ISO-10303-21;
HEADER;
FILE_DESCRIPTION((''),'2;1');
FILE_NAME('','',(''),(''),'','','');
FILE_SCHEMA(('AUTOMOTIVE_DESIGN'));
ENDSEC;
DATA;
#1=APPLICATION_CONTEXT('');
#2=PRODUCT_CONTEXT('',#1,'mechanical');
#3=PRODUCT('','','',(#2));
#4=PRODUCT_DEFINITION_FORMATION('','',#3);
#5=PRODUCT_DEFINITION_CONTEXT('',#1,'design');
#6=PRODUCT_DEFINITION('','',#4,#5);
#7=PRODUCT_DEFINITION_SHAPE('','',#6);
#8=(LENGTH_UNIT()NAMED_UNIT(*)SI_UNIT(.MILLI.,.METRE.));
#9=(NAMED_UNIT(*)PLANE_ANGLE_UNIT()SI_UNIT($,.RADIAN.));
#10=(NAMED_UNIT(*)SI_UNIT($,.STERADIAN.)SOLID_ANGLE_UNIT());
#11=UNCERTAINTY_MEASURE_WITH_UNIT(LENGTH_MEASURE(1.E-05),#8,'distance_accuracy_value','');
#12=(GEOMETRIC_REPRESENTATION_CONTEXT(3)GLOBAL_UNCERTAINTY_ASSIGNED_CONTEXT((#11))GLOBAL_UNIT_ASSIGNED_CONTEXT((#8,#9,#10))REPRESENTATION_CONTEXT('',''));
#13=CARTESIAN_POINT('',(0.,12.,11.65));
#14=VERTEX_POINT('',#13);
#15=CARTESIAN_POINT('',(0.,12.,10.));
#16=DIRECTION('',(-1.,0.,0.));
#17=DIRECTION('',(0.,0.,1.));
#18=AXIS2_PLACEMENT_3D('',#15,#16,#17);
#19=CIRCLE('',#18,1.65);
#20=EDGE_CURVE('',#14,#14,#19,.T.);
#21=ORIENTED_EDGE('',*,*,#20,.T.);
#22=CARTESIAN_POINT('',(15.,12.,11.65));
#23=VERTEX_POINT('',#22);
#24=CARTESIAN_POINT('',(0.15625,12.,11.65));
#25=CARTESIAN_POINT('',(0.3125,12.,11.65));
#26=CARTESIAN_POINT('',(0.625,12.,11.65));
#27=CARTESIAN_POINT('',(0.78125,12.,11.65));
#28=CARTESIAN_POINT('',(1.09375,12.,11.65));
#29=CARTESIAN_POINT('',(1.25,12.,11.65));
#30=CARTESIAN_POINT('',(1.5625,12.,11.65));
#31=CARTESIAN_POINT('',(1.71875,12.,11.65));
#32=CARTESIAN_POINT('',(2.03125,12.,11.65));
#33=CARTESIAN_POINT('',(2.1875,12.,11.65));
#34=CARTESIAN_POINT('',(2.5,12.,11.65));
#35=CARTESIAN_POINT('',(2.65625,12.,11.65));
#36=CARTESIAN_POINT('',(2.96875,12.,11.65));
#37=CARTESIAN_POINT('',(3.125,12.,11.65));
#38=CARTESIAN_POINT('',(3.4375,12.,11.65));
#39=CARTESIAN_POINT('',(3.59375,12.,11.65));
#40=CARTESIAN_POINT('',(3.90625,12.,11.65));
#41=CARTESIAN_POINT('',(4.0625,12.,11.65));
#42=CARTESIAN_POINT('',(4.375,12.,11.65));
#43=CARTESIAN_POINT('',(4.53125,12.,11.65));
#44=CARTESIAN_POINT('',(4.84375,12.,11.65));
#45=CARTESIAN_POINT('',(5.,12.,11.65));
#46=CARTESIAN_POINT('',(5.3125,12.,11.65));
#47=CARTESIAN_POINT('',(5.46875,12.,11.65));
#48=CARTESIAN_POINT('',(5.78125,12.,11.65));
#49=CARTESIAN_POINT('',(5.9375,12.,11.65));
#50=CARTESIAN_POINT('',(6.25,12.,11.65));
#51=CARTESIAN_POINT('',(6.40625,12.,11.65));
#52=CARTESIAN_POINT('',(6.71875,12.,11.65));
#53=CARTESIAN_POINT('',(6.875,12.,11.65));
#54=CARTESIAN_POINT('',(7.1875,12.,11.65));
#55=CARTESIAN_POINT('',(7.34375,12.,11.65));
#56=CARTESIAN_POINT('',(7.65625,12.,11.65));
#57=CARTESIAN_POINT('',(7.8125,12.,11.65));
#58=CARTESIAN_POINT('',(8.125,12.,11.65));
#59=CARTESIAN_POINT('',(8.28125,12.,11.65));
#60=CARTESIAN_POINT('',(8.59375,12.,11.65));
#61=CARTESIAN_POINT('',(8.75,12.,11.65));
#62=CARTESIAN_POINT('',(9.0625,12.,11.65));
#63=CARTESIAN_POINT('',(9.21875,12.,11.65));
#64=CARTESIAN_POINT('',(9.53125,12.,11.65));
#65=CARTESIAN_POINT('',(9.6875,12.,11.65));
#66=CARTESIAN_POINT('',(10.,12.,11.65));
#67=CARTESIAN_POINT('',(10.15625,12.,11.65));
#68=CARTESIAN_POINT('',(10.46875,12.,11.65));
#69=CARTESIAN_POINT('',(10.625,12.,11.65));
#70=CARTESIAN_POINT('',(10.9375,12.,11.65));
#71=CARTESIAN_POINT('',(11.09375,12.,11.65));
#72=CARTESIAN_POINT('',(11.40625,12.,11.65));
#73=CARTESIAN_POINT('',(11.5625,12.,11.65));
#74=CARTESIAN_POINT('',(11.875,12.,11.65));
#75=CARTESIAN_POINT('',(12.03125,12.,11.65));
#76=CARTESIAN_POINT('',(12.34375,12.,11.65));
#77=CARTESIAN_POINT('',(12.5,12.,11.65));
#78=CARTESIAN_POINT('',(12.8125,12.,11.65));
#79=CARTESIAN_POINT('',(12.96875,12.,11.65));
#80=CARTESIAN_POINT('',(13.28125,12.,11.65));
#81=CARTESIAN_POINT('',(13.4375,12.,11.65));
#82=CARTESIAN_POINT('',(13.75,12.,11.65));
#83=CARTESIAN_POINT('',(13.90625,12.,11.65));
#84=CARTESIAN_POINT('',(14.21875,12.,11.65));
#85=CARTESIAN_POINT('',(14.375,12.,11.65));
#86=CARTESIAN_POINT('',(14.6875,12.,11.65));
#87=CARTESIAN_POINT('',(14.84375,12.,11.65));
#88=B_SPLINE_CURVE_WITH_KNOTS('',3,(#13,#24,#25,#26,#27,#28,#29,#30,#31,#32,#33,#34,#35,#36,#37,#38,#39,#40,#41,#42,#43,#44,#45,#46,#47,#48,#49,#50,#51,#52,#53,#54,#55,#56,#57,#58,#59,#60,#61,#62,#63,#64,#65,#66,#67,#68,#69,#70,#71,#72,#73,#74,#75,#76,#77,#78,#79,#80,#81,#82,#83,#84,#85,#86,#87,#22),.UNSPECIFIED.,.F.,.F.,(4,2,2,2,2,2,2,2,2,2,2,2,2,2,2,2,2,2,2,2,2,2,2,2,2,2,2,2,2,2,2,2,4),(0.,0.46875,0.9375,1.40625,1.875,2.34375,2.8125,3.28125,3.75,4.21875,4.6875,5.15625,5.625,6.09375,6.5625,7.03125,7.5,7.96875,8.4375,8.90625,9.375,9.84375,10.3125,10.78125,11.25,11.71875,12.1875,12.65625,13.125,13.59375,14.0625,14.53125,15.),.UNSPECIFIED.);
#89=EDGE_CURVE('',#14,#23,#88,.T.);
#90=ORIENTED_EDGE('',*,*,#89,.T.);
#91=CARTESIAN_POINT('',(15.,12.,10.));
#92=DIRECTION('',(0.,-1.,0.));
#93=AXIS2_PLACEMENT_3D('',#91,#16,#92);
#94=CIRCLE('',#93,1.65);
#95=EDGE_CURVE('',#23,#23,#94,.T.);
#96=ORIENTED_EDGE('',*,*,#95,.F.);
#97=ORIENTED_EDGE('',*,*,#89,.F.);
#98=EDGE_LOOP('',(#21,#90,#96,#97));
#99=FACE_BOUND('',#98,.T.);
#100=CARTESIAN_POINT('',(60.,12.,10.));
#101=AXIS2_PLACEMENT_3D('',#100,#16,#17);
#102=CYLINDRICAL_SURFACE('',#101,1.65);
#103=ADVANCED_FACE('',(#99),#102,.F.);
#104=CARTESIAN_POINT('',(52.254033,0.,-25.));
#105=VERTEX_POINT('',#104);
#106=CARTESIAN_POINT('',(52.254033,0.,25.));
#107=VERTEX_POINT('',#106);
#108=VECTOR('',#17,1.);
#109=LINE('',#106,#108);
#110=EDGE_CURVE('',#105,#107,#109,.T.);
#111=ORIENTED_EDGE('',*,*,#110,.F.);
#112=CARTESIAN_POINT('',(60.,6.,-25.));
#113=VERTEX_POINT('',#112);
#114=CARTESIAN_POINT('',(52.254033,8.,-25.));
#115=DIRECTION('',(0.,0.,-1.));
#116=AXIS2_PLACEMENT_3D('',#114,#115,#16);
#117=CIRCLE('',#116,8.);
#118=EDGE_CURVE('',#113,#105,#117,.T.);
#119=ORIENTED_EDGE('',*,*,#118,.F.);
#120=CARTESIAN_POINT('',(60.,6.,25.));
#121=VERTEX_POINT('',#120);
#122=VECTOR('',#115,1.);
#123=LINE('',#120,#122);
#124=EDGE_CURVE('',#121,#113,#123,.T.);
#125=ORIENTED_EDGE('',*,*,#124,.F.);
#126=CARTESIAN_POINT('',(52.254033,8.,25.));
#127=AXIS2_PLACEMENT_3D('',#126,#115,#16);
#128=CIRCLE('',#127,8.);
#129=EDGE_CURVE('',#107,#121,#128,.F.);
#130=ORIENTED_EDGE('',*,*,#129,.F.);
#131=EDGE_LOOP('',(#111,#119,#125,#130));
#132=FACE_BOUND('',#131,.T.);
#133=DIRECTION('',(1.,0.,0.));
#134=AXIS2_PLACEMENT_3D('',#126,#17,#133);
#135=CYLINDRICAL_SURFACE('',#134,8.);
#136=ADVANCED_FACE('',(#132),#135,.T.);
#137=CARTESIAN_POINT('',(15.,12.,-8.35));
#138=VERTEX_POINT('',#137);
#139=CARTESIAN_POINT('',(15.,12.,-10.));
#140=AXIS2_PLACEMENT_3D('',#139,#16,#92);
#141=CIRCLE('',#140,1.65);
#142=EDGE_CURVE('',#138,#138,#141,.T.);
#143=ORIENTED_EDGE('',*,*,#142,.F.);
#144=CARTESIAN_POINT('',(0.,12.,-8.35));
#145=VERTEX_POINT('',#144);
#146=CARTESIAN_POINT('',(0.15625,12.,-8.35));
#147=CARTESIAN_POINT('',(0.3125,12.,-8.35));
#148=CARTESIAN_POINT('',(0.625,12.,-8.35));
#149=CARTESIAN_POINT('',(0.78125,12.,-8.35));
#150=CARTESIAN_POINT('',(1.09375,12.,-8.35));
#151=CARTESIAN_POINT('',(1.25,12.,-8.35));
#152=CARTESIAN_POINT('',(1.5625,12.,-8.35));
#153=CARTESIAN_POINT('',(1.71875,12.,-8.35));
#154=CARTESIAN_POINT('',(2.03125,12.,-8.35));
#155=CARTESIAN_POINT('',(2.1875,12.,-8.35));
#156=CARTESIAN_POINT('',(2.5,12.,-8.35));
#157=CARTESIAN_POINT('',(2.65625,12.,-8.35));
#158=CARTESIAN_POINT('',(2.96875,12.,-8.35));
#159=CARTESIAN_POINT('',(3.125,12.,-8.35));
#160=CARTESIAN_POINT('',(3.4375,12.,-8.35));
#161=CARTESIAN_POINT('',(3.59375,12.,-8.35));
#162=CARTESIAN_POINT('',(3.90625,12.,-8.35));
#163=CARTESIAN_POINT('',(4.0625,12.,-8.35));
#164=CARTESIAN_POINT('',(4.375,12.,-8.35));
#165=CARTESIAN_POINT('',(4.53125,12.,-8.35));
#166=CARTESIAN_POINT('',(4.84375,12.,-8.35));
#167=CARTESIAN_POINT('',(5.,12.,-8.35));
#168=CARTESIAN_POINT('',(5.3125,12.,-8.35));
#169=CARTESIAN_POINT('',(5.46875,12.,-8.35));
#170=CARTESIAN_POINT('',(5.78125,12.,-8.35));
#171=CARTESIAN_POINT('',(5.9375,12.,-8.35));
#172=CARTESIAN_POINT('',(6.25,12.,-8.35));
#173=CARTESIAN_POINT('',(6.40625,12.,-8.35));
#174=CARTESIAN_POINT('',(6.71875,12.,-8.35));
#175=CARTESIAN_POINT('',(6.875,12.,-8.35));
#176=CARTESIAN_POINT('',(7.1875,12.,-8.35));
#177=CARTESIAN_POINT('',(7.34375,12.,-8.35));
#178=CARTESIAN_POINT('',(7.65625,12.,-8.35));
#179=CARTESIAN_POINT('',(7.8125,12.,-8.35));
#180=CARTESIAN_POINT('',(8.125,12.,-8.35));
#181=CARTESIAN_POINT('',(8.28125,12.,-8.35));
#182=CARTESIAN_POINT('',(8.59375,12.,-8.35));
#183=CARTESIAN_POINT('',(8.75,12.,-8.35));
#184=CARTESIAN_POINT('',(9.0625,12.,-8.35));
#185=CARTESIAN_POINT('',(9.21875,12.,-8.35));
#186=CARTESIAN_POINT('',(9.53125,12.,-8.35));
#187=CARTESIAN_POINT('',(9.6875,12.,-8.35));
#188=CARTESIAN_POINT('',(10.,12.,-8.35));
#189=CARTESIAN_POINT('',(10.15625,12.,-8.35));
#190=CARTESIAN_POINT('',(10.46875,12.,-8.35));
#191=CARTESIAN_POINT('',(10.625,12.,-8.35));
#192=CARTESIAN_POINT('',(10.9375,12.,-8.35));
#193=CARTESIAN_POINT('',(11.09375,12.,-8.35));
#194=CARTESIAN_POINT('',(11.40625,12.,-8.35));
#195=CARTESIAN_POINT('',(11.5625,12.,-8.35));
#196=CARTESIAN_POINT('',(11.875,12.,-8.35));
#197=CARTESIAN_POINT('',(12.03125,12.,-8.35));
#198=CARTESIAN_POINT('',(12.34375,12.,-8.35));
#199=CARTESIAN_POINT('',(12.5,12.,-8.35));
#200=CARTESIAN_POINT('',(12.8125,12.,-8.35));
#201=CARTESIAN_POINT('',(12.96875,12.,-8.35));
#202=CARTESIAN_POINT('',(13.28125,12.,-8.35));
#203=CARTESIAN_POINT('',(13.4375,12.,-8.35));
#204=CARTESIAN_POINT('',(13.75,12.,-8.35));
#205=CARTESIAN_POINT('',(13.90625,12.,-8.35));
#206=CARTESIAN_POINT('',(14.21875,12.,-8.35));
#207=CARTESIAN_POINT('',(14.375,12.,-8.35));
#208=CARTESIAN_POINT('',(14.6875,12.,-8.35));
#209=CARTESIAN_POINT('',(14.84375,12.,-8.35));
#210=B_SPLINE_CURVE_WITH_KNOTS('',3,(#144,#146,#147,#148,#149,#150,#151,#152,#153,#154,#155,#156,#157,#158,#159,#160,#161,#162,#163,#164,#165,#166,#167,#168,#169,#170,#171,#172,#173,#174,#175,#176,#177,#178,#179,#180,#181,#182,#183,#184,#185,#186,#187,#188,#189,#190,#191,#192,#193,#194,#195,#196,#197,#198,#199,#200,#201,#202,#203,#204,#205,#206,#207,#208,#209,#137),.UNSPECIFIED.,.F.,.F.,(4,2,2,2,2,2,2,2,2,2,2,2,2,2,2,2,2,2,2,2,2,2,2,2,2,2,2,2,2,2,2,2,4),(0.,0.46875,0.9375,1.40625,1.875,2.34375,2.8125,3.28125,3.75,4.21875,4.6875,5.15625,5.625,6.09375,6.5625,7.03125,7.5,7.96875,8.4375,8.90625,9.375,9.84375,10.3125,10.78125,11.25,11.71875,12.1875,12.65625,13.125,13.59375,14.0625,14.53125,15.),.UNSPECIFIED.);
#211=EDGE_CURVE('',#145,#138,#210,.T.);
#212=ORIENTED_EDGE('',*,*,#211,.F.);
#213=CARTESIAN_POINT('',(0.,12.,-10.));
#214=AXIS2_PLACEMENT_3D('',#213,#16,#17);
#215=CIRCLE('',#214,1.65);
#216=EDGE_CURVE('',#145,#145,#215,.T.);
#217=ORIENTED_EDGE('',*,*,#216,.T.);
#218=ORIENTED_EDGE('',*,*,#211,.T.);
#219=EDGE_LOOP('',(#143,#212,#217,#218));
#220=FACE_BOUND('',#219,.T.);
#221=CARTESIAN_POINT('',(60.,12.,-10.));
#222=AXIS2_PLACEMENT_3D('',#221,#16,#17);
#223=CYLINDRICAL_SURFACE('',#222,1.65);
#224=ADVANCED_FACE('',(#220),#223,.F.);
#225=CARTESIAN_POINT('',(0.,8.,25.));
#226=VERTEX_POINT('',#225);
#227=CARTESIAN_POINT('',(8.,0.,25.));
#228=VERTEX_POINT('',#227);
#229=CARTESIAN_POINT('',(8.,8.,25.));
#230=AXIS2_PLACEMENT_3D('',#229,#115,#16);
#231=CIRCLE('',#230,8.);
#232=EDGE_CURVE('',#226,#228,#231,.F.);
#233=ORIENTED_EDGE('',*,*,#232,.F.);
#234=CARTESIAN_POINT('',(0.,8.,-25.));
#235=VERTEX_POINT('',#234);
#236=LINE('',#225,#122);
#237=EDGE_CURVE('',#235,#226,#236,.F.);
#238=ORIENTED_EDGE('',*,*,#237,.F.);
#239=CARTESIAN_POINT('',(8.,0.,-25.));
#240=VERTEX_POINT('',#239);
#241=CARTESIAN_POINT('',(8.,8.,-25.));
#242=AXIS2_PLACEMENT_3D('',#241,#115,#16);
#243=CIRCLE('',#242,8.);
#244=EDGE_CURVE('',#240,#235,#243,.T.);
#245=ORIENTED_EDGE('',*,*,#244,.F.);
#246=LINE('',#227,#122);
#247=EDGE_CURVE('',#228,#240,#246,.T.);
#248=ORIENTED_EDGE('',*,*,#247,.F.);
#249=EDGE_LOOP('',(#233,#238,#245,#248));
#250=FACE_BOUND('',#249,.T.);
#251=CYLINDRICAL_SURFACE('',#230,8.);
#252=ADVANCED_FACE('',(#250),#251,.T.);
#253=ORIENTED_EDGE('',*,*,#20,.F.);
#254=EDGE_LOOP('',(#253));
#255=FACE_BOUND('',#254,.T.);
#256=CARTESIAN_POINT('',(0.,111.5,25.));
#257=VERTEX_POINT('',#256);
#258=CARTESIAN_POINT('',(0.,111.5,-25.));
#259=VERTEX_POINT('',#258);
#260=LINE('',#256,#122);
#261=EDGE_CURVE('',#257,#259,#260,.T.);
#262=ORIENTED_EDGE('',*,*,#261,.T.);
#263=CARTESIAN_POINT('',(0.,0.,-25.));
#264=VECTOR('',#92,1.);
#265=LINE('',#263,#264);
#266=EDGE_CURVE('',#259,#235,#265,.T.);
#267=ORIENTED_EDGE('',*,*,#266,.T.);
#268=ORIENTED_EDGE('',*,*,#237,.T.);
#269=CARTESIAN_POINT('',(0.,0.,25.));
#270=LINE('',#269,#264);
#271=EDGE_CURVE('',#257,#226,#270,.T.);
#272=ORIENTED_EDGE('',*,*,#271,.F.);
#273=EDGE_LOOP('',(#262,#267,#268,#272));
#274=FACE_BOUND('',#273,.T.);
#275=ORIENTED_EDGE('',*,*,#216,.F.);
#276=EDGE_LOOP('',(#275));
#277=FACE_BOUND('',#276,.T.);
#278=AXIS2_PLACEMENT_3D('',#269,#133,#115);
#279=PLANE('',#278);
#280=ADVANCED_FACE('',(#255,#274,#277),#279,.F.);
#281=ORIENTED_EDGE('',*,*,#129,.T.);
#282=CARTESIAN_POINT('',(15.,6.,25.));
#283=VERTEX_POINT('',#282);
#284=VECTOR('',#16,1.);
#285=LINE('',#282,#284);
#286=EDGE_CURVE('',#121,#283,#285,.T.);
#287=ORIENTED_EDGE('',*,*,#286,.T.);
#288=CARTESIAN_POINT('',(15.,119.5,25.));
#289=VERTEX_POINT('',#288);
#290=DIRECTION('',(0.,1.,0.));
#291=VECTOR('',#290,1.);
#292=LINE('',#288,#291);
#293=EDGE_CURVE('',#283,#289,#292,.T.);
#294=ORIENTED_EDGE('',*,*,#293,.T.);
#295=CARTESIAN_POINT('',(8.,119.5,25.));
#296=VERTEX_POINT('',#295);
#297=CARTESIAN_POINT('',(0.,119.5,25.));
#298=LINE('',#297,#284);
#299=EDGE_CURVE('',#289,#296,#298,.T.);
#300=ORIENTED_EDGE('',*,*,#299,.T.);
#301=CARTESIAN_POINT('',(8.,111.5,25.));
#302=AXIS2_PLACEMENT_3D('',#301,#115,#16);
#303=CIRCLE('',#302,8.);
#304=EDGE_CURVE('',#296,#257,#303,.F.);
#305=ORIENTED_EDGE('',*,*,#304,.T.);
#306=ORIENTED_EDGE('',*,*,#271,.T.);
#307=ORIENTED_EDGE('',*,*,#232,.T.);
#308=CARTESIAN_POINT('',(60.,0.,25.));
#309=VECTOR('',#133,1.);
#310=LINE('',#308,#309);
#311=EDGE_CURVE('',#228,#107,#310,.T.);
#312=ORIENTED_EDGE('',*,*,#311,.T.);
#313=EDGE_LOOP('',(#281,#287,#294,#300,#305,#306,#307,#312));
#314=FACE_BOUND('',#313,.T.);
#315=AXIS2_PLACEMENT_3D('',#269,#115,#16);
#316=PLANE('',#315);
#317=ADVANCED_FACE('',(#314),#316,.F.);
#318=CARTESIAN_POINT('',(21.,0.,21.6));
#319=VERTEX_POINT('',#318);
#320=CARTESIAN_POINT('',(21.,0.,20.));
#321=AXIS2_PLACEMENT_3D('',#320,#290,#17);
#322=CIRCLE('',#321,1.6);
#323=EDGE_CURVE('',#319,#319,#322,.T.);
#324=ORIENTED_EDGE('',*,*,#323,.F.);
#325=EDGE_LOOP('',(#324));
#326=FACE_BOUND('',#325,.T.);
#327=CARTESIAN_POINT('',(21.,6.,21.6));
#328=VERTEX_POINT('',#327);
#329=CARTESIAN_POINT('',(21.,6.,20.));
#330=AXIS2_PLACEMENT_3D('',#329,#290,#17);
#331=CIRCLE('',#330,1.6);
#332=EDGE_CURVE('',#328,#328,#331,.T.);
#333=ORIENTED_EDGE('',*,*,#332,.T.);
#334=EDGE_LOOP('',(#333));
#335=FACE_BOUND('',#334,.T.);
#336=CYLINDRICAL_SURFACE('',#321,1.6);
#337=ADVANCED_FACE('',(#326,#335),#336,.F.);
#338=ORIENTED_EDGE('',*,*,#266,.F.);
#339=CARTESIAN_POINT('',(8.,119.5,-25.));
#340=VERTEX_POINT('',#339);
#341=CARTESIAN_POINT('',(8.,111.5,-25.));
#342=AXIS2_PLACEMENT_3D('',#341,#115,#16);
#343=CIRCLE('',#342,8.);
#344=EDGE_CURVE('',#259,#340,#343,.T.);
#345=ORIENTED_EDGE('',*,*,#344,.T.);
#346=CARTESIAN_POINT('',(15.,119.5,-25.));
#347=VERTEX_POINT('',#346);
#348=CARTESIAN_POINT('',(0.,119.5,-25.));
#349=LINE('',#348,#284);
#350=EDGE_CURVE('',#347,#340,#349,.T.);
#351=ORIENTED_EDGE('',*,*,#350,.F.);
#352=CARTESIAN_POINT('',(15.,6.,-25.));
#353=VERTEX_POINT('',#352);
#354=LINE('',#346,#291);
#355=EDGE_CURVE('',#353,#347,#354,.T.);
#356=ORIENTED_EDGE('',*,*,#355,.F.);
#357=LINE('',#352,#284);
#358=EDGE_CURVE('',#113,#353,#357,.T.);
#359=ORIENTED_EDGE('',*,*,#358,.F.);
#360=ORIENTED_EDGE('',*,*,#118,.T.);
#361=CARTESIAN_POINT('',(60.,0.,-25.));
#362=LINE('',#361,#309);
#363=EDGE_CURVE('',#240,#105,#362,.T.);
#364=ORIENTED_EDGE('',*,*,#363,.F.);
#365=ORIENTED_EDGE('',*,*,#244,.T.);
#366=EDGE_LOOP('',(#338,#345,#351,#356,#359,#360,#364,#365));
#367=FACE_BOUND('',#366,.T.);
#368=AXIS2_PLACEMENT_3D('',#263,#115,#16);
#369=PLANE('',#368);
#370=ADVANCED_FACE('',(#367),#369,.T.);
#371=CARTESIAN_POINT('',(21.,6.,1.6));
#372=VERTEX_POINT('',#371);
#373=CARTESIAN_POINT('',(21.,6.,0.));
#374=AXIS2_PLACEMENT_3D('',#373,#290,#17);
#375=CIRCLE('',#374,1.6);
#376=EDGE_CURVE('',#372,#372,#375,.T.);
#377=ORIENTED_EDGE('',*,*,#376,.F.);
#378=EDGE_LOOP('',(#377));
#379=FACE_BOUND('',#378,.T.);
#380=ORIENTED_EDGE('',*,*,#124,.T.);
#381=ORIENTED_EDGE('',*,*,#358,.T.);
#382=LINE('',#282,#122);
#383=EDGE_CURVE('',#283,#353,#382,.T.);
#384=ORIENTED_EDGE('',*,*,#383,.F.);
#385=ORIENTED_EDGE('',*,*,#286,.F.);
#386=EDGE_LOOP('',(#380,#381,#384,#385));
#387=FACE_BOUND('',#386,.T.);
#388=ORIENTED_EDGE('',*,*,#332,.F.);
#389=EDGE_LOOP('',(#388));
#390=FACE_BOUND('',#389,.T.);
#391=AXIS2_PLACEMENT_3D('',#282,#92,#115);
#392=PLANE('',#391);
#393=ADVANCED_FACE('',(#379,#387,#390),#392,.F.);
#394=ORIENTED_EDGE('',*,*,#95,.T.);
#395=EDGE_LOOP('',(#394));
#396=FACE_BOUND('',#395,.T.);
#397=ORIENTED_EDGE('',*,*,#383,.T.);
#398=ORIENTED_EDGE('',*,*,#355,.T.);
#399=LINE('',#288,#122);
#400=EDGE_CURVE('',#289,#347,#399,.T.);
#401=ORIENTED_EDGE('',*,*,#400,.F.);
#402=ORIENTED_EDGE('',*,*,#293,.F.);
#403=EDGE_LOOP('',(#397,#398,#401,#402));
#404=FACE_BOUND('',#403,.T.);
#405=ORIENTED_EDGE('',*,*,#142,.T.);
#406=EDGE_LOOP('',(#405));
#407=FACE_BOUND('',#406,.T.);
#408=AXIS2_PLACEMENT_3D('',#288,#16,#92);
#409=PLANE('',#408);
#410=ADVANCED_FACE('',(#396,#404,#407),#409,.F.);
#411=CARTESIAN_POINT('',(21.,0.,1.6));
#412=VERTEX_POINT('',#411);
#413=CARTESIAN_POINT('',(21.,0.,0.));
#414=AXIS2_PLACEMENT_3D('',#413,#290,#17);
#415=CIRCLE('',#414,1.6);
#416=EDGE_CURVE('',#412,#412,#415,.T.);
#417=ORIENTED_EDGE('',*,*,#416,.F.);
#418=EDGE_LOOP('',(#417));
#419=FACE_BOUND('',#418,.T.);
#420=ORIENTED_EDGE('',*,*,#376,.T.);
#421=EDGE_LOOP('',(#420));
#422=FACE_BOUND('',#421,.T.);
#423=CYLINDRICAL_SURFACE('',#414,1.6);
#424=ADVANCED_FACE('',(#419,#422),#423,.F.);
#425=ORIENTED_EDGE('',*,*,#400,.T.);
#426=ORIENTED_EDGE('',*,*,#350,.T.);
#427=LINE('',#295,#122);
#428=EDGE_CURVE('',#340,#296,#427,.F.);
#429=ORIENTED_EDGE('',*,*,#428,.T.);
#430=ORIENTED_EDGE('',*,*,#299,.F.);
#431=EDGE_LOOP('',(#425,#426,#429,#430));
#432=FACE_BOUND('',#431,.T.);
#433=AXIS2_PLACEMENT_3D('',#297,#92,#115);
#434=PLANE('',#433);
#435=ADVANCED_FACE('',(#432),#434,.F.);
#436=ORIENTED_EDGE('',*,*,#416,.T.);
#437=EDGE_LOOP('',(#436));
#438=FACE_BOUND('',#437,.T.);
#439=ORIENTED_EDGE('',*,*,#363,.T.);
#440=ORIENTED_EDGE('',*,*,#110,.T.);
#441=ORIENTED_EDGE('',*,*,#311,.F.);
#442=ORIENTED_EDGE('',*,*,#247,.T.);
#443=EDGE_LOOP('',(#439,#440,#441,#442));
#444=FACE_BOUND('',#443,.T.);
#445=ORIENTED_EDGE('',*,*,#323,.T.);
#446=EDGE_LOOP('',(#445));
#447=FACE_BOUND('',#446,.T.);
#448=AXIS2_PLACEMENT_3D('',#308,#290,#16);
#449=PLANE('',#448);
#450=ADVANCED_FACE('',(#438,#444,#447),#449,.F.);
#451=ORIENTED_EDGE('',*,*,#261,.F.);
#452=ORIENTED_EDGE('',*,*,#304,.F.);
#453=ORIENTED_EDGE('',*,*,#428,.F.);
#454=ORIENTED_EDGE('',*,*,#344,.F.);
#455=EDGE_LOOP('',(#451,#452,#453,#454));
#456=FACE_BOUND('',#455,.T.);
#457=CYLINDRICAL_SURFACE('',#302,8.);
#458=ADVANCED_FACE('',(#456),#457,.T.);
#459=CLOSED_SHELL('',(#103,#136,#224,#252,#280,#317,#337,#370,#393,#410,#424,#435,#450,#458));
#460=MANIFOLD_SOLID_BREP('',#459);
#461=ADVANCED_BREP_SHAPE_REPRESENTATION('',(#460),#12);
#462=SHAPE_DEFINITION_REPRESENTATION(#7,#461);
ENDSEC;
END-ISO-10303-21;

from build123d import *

# Parameters (mm, degrees)
EXTRUDE_1_DEPTH     = 25
FILLET_1_R          = 8
SKETCH_2_R          = 1.65
CUT_EXTRUDE_1_DEPTH = 137.034003102
SKETCH_3_R          = 1.6
CUT_EXTRUDE_2_DEPTH = 131.794686436


with BuildPart() as part:
    # 草图1 → 凸台-拉伸1 (new, symmetric)
    with BuildSketch(Plane.XY):
        Polygon((0, 0), (0, 119.5), (15, 119.5), (15, 6), (60, 6), (60, 0), align=None)
    extrude(amount=EXTRUDE_1_DEPTH, both=True)

    # 圆角1
    # the kernel refuses this fillet: 8 mm, written as the material it takes off along each edge
    with BuildSketch(Plane(origin=(0, 119.5, 45), x_dir=(0, -1, 0), z_dir=(0, 0, -1)), Plane(origin=(0, 0, -45), x_dir=(0, 1, 0), z_dir=(0, 0, 1))) as fillet_1_piece_1:
        with BuildLine():
            CenterArc((FILLET_1_R, -FILLET_1_R), FILLET_1_R, 90, 90)
            Line((0, -FILLET_1_R), (-FILLET_1_R * 0.02, -FILLET_1_R))
            Line((-FILLET_1_R * 0.02, -FILLET_1_R), (-FILLET_1_R * 0.02, FILLET_1_R * 0.02))
            Line((-FILLET_1_R * 0.02, FILLET_1_R * 0.02), (FILLET_1_R, FILLET_1_R * 0.02))
            Line((FILLET_1_R, FILLET_1_R * 0.02), (FILLET_1_R, 0))
        make_face()
    extrude(amount=90, mode=Mode.SUBTRACT)
    with BuildSketch(Plane(origin=(60, 0, -44.364916731), x_dir=(0, 1, 0), z_dir=(0, 0, 1))) as fillet_1_piece_2:
        with BuildLine():
            CenterArc((8, 7.745966692), FILLET_1_R, 180, 75.522487814)
            Line((0, 7.745966692), (-0.16, 7.745966692))
            Line((-0.16, 7.745966692), (-0.16, 0))
            Line((-0.16, 0), (0, -0.16))
            ThreePointArc((0, -0.16), (3, -0.16), (5.96, -0.154919334))
            Line((5.96, -0.154919334), (6, 0))
        make_face()
    extrude(amount=88.729833462, mode=Mode.SUBTRACT)

    # 草图2 → 切除-拉伸1 (cut, through all)
    with BuildSketch(Plane.ZY):
        with Locations((10, 12)):
            Circle(SKETCH_2_R)
        with Locations((-10, 12)):
            Circle(SKETCH_2_R)
    extrude(amount=-CUT_EXTRUDE_1_DEPTH, mode=Mode.SUBTRACT)

    # 草图3 → 切除-拉伸2 (cut, through all)
    with BuildSketch(Plane(origin=(0, 6, 0), x_dir=(1, 0, 0), z_dir=(0, 1, 0))):
        with Locations(Location((21, -20, 0), (0, 0, 270))):
            Circle(SKETCH_3_R)
        with Locations(Location((21, 0, 0), (0, 0, 270))):
            Circle(SKETCH_3_R)
    extrude(amount=-CUT_EXTRUDE_2_DEPTH, mode=Mode.SUBTRACT)


solid = part.part
